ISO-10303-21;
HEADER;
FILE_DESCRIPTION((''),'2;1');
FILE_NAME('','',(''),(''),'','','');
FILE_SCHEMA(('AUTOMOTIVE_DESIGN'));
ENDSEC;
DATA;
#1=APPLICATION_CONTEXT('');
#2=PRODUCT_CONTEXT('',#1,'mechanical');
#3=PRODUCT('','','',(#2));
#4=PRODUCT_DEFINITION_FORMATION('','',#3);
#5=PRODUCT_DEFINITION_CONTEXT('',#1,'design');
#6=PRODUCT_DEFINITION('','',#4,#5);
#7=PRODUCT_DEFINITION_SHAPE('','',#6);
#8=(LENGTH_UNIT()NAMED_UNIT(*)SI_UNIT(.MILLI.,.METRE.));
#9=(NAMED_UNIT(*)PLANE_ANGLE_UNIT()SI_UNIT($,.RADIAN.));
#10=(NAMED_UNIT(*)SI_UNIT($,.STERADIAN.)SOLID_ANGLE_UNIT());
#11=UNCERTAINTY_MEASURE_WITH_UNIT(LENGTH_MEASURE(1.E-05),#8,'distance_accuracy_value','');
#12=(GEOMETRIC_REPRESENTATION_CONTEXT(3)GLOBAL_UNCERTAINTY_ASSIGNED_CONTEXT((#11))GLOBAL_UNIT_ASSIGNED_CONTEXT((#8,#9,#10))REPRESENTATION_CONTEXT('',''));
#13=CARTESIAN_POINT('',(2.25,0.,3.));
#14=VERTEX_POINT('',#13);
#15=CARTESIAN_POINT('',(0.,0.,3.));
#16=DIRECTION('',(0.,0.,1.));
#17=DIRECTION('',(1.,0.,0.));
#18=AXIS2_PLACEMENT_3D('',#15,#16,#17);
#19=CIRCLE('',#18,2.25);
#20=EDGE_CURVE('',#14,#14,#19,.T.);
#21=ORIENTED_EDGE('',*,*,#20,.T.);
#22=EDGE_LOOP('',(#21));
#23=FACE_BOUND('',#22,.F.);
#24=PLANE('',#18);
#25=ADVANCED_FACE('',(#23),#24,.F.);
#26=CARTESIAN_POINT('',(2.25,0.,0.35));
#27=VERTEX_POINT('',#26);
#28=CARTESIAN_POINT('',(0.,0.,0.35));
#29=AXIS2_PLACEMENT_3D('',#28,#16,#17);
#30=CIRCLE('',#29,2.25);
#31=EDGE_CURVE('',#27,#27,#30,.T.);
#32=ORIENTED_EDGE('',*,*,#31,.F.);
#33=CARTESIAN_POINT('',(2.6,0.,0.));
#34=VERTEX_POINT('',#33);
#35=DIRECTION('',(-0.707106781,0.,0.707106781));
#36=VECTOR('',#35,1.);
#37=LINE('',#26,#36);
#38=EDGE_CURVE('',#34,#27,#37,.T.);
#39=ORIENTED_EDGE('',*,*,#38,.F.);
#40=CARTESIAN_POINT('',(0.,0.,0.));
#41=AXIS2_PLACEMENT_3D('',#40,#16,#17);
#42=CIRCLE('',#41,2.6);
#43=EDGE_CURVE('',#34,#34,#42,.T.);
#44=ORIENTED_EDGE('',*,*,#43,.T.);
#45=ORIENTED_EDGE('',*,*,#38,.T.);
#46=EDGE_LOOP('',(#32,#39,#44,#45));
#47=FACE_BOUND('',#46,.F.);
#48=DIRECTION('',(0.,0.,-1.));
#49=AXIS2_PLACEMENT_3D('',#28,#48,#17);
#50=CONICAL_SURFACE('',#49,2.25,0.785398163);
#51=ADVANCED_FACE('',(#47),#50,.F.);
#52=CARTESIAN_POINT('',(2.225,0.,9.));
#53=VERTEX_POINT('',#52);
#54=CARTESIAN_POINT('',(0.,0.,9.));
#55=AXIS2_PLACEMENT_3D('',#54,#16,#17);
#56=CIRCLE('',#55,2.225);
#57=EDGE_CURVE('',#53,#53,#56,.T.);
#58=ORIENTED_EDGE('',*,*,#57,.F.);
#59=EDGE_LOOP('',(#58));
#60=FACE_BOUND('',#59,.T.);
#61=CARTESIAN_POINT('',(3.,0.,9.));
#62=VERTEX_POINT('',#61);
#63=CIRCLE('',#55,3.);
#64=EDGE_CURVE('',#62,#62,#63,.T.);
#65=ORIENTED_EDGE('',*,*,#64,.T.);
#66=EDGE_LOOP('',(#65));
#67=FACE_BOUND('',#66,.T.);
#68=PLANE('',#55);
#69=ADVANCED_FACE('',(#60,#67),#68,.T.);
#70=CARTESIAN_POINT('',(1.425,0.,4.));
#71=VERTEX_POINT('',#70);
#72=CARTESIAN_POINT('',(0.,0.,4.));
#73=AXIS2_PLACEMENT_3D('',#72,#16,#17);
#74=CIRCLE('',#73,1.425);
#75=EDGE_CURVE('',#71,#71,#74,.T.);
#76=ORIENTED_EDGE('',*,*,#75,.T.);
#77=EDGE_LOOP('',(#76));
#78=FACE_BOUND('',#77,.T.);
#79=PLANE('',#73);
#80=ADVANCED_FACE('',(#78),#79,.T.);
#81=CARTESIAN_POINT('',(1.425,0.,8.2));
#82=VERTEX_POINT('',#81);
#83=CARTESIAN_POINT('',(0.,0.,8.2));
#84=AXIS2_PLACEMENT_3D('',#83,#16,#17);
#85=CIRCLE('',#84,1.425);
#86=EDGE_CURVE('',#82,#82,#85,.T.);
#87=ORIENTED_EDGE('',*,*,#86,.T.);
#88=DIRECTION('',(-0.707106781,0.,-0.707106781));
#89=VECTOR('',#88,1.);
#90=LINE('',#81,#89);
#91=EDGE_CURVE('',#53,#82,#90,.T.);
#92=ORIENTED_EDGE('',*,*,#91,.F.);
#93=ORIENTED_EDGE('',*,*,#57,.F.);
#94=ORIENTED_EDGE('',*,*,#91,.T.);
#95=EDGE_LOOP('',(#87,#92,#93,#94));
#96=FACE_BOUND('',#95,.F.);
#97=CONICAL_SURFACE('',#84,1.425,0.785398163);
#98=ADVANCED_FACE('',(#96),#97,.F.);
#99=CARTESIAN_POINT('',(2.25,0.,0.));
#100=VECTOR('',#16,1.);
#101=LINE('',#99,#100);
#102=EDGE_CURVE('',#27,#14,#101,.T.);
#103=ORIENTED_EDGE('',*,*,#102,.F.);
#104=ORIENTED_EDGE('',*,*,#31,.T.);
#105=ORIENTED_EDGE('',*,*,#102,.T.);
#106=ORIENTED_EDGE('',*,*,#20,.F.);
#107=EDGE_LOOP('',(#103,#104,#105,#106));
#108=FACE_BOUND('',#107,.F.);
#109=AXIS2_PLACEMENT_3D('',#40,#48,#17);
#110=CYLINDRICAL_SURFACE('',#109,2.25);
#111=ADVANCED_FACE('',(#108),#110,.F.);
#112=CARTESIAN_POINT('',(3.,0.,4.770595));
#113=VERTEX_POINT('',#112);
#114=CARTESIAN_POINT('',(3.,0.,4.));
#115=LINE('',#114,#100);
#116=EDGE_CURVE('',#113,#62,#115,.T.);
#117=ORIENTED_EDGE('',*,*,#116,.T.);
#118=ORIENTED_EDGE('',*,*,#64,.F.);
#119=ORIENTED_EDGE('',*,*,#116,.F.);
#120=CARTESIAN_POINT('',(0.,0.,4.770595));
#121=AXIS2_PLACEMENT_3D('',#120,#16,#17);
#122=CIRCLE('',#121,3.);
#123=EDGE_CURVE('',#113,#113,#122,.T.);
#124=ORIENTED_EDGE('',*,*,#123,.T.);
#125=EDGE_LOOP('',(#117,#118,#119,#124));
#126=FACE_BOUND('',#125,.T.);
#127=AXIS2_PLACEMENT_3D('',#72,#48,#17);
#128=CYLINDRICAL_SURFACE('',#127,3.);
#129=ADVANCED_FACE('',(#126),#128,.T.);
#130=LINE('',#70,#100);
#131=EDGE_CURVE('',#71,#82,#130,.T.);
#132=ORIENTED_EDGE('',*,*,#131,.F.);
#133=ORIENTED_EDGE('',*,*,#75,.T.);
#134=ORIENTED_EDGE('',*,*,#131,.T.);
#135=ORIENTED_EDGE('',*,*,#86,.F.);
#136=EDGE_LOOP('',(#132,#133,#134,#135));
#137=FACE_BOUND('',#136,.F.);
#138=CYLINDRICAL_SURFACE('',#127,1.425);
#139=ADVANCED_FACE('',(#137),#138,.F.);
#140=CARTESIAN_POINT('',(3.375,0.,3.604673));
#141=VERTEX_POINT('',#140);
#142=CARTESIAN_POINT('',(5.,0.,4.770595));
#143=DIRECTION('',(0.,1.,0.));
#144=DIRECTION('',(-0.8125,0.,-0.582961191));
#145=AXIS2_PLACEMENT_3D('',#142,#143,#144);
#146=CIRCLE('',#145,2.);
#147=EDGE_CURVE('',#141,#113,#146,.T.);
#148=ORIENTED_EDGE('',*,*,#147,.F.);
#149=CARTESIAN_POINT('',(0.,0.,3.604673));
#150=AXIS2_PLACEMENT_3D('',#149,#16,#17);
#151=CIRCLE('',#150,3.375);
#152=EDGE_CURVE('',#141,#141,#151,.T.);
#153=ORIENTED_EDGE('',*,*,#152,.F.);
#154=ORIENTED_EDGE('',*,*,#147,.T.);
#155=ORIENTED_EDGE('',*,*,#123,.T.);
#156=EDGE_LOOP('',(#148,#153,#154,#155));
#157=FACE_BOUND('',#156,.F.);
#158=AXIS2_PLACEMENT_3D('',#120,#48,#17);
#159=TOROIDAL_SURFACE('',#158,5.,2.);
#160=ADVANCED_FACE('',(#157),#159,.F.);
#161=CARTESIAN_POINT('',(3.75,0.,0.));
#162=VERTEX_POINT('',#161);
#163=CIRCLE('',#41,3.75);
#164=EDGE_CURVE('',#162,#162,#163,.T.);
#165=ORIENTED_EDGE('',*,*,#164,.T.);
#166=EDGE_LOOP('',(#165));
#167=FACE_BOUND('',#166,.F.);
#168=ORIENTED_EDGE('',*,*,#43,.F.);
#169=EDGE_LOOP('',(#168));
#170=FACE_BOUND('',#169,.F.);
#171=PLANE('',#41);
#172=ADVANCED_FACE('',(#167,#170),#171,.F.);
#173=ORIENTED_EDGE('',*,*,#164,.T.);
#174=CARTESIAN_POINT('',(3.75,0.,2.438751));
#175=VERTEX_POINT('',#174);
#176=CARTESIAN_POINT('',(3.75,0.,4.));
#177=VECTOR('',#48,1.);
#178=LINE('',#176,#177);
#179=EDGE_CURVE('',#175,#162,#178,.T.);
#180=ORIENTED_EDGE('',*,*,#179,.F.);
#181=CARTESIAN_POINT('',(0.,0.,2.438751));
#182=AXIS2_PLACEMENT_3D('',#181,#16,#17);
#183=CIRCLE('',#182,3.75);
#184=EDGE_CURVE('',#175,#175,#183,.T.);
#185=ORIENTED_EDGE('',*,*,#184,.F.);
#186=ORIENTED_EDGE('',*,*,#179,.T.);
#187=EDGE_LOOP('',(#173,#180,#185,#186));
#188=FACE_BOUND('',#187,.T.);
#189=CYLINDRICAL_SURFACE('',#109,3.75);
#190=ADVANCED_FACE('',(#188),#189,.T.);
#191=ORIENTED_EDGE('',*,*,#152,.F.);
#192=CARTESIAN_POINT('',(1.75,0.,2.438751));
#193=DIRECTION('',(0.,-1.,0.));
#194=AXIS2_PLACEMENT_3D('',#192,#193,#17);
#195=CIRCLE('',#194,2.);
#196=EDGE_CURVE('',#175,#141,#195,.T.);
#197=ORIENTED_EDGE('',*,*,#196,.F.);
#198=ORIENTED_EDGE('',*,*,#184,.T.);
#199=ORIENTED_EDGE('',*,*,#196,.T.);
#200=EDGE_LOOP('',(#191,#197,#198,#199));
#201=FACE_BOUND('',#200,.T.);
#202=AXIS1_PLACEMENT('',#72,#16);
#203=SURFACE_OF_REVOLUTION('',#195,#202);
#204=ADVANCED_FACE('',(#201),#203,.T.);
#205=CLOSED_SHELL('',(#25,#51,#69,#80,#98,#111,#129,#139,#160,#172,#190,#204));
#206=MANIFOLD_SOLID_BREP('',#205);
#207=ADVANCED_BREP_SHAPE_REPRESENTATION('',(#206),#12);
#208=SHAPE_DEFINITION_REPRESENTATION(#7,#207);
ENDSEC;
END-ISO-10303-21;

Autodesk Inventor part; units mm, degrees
ref_plane "YZ Plane" through (0, 0, 0) normal (1, 0, 0) x (0, 1, 0)
ref_plane "XZ Plane" through (0, 0, 0) normal (0, 1, 0) x (-1, 0, 0)
ref_plane "XY Plane" through (0, 0, 0) normal (0, 0, 1) x (1, 0, 0)
sketch "Szkic1" plane through (0, 0, 0) normal (0, 0, 1) x (1, 0, 0)
  circle A0 centre (0, 0) radius 2.25
  circle A1 centre (0, 0) radius 3.75
  dimension "d0" = 4.5
  dimension "d1" = 1.5
extrude "Wyciągnięcie proste1" add sketch "Szkic1" along normal blind 3
sketch "Szkic2" plane through (0, 0, 3) normal (0, 0, 1) x (1, 0, 0)
  circle A0 centre (0, 0) radius 3.75 projected
  circle A1 centre (0, 0) radius 2.25 projected
extrude "Wyciągnięcie proste2" add sketch "Szkic2" along normal blind 1 contours A0 | A1
sketch "Szkic3" plane through (0, 0, 4) normal (0, 0, 1) x (1, 0, 0)
  circle A0 centre (0, 0) radius 1.425
  circle A1 centre (0, 0) radius 3
  dimension "d6" = 2.85
  dimension "d7" = 6
extrude "Wyciągnięcie proste3" add sketch "Szkic3" along normal blind 5
fillet "Zaokrąglenie1" radius 2 2 edges at (-3.75, 0, 4) (-3, 0, 4)
chamfer "Faza1" distance 0.8 angle 45 1 edges at (-1.425, 0, 9)
chamfer "Faza2" distance 0.35 angle 45 1 edges at (-2.25, 0, 0)
properties part number "MagnetHolder"
